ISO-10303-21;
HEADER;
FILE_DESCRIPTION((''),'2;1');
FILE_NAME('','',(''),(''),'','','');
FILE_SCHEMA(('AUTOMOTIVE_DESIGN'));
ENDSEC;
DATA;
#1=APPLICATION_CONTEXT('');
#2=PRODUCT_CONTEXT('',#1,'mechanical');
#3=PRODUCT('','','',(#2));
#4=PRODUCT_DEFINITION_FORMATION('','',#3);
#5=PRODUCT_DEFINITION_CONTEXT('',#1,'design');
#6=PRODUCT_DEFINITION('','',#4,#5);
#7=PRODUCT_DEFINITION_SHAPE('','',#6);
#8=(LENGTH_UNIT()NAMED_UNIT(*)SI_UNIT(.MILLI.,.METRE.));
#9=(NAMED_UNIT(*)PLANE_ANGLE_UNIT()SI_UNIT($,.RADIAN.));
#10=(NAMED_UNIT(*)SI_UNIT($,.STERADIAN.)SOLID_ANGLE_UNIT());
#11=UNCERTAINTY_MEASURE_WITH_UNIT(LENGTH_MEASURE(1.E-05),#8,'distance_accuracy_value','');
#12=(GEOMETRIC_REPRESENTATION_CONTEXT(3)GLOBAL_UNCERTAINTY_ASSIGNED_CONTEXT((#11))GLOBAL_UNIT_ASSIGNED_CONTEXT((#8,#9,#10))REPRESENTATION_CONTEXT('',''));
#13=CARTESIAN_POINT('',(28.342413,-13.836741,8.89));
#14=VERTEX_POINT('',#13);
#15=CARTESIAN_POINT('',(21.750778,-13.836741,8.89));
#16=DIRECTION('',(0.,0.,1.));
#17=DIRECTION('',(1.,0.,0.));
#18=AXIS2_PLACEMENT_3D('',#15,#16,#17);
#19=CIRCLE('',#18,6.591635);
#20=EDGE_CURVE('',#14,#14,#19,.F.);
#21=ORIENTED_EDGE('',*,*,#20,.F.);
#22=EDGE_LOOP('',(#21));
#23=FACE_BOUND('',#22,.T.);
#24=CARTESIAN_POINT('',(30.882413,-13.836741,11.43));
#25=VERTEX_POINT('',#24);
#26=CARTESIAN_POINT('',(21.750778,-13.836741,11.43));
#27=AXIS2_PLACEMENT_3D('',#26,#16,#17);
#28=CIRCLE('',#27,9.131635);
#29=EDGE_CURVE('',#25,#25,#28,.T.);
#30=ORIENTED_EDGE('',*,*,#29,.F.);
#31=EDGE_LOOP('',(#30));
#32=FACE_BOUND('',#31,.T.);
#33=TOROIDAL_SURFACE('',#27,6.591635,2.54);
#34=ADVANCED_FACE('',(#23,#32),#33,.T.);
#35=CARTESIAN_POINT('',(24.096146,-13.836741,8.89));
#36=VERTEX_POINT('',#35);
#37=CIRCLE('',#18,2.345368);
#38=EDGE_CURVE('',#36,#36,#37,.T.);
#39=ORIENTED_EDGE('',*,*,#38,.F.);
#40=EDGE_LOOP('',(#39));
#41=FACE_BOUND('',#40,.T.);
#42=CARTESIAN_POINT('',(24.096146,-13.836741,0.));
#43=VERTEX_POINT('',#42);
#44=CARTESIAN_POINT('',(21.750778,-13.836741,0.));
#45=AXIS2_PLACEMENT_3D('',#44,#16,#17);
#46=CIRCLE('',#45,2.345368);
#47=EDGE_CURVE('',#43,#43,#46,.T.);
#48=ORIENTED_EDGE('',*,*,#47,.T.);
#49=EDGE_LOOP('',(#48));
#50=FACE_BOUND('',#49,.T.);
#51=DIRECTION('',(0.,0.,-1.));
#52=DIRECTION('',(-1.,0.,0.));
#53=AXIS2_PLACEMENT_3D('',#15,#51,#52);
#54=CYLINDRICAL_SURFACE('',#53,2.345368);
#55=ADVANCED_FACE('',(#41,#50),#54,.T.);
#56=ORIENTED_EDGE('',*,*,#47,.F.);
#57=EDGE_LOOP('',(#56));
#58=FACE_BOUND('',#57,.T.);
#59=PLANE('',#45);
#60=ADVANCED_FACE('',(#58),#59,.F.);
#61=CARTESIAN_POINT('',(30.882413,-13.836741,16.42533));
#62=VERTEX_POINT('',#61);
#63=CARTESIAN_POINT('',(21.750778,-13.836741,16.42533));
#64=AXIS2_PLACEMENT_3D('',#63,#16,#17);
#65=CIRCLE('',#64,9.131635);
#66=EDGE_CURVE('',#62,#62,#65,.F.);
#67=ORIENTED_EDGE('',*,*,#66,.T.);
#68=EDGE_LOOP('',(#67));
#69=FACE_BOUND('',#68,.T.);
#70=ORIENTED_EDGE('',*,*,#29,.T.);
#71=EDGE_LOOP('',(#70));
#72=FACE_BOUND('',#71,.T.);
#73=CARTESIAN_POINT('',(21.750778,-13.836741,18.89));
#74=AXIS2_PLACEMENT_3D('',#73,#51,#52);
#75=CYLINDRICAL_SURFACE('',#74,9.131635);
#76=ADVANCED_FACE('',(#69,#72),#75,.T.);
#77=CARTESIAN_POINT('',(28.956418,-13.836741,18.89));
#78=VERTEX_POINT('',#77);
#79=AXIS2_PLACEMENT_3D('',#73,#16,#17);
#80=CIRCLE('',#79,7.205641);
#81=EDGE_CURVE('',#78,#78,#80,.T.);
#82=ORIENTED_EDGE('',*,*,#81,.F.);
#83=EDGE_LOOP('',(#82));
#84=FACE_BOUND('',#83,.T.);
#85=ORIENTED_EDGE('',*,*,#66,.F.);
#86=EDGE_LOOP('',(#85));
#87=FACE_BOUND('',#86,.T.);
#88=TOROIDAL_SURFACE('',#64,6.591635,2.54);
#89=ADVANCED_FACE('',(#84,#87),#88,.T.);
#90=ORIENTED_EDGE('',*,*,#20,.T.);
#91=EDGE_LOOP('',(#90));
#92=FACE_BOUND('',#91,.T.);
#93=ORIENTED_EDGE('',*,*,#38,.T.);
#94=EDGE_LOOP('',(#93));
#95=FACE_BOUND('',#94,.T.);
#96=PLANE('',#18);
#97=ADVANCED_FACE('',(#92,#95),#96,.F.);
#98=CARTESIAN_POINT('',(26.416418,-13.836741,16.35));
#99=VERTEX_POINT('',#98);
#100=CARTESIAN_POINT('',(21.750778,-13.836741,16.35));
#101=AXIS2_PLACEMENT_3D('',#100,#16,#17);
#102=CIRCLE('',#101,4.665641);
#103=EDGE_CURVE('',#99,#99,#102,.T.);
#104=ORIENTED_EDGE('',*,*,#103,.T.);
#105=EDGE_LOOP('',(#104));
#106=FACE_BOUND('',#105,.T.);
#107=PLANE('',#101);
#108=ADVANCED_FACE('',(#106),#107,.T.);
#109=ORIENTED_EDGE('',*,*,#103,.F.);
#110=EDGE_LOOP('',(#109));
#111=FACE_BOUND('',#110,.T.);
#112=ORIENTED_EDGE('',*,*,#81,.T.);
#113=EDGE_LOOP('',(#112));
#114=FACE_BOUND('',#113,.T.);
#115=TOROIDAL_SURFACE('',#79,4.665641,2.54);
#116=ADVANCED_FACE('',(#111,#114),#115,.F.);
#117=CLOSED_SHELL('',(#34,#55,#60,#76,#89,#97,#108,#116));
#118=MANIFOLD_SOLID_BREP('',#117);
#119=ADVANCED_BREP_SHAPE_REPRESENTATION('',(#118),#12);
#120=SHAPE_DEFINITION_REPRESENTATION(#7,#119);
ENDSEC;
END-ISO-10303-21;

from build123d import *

# Parameters (mm, degrees)
SKETCH1_R           = 2.345368149
BOSS_EXTRUDE1_DEPTH = 8.89
SKETCH2_R           = 9.131634977
BOSS_EXTRUDE2_DEPTH = 10
SKETCH3_R           = 7.205640658
CUT_EXTRUDE1_DEPTH  = 2.54
FILLET1_R           = 2.54
FILLET2_R           = 2.54


# Some blends are built 0.0001 mm under size
with BuildPart() as part:
    # Sketch1 → Boss-Extrude1 (new body)
    with BuildSketch(Plane.XY):
        with Locations((21.750777604, -13.836740686)):
            Circle(SKETCH1_R)
    extrude(amount=BOSS_EXTRUDE1_DEPTH)

    # Sketch2 → Boss-Extrude2 (add)
    with BuildSketch(Plane.XY.offset(8.89)):
        with Locations((21.750777604, -13.836740686)):
            Circle(SKETCH2_R)
    extrude(amount=BOSS_EXTRUDE2_DEPTH)

    # Sketch3 → Cut-Extrude1 (cut)
    with BuildSketch(Plane.XY.offset(18.89)):
        with Locations((21.750777604, -13.836740686)):
            Circle(SKETCH3_R)
    extrude(amount=-CUT_EXTRUDE1_DEPTH, mode=Mode.SUBTRACT)

    # Fillet1
    fillet1_edges = [part.edges().sort_by_distance(p)[0] for p in [
        (14.545136946, -13.836740686, 16.35),
    ]]
    fillet(fillet1_edges, radius=FILLET1_R - 0.0001)  # a hair under: the kernel refuses the full size

    # Fillet2
    # the kernel refuses this fillet: 2.54 mm, written as the material it takes off along each edge
    with BuildSketch(Plane(origin=(21.750777604, -13.836740686, 8.89), x_dir=(1, 0, 0), z_dir=(0, -1, 0))) as fillet2_piece_1:
        with BuildLine():
            CenterArc((9.131634977 - FILLET2_R, FILLET2_R), FILLET2_R, 270, 90)
            Line((9.131634977 - FILLET2_R, 0), (9.131634977 - FILLET2_R, -FILLET2_R * 0.02))
            Line((9.131634977 - FILLET2_R, -FILLET2_R * 0.02), (9.131634977 + FILLET2_R * 0.02, -FILLET2_R * 0.02))
            Line((9.131634977 + FILLET2_R * 0.02, -FILLET2_R * 0.02), (9.131634977 + FILLET2_R * 0.02, FILLET2_R))
            Line((9.131634977 + FILLET2_R * 0.02, FILLET2_R), (9.131634977, FILLET2_R))
        make_face()
    revolve(axis=Axis((21.750777604, -13.836740686, 8.89), (0, 0, 1)), mode=Mode.SUBTRACT)
    with BuildSketch(Plane(origin=(21.750777604, -13.836740686, 18.89), x_dir=(1, 0, 0), z_dir=(0, -1, 0))) as fillet2_piece_2:
        with BuildLine():
            CenterArc((6.591634977, -2.46466976), FILLET2_R, 0, 76.011064225)
            Line((9.131634977, -2.46466976), (9.182434977, -2.46466976))
            Line((9.182434977, -2.46466976), (9.182434977, 0))
            Line((9.182434977, 0), (9.131634977, 0.0508))
            ThreePointArc((9.131634977, 0.0508), (8.168637817, 0.0508), (7.217920771, 0.049293395))
            Line((7.217920771, 0.049293395), (7.205640658, 0))
        make_face()
    revolve(axis=Axis((21.750777604, -13.836740686, 18.89), (0, 0, 1)), mode=Mode.SUBTRACT)


solid = part.part
